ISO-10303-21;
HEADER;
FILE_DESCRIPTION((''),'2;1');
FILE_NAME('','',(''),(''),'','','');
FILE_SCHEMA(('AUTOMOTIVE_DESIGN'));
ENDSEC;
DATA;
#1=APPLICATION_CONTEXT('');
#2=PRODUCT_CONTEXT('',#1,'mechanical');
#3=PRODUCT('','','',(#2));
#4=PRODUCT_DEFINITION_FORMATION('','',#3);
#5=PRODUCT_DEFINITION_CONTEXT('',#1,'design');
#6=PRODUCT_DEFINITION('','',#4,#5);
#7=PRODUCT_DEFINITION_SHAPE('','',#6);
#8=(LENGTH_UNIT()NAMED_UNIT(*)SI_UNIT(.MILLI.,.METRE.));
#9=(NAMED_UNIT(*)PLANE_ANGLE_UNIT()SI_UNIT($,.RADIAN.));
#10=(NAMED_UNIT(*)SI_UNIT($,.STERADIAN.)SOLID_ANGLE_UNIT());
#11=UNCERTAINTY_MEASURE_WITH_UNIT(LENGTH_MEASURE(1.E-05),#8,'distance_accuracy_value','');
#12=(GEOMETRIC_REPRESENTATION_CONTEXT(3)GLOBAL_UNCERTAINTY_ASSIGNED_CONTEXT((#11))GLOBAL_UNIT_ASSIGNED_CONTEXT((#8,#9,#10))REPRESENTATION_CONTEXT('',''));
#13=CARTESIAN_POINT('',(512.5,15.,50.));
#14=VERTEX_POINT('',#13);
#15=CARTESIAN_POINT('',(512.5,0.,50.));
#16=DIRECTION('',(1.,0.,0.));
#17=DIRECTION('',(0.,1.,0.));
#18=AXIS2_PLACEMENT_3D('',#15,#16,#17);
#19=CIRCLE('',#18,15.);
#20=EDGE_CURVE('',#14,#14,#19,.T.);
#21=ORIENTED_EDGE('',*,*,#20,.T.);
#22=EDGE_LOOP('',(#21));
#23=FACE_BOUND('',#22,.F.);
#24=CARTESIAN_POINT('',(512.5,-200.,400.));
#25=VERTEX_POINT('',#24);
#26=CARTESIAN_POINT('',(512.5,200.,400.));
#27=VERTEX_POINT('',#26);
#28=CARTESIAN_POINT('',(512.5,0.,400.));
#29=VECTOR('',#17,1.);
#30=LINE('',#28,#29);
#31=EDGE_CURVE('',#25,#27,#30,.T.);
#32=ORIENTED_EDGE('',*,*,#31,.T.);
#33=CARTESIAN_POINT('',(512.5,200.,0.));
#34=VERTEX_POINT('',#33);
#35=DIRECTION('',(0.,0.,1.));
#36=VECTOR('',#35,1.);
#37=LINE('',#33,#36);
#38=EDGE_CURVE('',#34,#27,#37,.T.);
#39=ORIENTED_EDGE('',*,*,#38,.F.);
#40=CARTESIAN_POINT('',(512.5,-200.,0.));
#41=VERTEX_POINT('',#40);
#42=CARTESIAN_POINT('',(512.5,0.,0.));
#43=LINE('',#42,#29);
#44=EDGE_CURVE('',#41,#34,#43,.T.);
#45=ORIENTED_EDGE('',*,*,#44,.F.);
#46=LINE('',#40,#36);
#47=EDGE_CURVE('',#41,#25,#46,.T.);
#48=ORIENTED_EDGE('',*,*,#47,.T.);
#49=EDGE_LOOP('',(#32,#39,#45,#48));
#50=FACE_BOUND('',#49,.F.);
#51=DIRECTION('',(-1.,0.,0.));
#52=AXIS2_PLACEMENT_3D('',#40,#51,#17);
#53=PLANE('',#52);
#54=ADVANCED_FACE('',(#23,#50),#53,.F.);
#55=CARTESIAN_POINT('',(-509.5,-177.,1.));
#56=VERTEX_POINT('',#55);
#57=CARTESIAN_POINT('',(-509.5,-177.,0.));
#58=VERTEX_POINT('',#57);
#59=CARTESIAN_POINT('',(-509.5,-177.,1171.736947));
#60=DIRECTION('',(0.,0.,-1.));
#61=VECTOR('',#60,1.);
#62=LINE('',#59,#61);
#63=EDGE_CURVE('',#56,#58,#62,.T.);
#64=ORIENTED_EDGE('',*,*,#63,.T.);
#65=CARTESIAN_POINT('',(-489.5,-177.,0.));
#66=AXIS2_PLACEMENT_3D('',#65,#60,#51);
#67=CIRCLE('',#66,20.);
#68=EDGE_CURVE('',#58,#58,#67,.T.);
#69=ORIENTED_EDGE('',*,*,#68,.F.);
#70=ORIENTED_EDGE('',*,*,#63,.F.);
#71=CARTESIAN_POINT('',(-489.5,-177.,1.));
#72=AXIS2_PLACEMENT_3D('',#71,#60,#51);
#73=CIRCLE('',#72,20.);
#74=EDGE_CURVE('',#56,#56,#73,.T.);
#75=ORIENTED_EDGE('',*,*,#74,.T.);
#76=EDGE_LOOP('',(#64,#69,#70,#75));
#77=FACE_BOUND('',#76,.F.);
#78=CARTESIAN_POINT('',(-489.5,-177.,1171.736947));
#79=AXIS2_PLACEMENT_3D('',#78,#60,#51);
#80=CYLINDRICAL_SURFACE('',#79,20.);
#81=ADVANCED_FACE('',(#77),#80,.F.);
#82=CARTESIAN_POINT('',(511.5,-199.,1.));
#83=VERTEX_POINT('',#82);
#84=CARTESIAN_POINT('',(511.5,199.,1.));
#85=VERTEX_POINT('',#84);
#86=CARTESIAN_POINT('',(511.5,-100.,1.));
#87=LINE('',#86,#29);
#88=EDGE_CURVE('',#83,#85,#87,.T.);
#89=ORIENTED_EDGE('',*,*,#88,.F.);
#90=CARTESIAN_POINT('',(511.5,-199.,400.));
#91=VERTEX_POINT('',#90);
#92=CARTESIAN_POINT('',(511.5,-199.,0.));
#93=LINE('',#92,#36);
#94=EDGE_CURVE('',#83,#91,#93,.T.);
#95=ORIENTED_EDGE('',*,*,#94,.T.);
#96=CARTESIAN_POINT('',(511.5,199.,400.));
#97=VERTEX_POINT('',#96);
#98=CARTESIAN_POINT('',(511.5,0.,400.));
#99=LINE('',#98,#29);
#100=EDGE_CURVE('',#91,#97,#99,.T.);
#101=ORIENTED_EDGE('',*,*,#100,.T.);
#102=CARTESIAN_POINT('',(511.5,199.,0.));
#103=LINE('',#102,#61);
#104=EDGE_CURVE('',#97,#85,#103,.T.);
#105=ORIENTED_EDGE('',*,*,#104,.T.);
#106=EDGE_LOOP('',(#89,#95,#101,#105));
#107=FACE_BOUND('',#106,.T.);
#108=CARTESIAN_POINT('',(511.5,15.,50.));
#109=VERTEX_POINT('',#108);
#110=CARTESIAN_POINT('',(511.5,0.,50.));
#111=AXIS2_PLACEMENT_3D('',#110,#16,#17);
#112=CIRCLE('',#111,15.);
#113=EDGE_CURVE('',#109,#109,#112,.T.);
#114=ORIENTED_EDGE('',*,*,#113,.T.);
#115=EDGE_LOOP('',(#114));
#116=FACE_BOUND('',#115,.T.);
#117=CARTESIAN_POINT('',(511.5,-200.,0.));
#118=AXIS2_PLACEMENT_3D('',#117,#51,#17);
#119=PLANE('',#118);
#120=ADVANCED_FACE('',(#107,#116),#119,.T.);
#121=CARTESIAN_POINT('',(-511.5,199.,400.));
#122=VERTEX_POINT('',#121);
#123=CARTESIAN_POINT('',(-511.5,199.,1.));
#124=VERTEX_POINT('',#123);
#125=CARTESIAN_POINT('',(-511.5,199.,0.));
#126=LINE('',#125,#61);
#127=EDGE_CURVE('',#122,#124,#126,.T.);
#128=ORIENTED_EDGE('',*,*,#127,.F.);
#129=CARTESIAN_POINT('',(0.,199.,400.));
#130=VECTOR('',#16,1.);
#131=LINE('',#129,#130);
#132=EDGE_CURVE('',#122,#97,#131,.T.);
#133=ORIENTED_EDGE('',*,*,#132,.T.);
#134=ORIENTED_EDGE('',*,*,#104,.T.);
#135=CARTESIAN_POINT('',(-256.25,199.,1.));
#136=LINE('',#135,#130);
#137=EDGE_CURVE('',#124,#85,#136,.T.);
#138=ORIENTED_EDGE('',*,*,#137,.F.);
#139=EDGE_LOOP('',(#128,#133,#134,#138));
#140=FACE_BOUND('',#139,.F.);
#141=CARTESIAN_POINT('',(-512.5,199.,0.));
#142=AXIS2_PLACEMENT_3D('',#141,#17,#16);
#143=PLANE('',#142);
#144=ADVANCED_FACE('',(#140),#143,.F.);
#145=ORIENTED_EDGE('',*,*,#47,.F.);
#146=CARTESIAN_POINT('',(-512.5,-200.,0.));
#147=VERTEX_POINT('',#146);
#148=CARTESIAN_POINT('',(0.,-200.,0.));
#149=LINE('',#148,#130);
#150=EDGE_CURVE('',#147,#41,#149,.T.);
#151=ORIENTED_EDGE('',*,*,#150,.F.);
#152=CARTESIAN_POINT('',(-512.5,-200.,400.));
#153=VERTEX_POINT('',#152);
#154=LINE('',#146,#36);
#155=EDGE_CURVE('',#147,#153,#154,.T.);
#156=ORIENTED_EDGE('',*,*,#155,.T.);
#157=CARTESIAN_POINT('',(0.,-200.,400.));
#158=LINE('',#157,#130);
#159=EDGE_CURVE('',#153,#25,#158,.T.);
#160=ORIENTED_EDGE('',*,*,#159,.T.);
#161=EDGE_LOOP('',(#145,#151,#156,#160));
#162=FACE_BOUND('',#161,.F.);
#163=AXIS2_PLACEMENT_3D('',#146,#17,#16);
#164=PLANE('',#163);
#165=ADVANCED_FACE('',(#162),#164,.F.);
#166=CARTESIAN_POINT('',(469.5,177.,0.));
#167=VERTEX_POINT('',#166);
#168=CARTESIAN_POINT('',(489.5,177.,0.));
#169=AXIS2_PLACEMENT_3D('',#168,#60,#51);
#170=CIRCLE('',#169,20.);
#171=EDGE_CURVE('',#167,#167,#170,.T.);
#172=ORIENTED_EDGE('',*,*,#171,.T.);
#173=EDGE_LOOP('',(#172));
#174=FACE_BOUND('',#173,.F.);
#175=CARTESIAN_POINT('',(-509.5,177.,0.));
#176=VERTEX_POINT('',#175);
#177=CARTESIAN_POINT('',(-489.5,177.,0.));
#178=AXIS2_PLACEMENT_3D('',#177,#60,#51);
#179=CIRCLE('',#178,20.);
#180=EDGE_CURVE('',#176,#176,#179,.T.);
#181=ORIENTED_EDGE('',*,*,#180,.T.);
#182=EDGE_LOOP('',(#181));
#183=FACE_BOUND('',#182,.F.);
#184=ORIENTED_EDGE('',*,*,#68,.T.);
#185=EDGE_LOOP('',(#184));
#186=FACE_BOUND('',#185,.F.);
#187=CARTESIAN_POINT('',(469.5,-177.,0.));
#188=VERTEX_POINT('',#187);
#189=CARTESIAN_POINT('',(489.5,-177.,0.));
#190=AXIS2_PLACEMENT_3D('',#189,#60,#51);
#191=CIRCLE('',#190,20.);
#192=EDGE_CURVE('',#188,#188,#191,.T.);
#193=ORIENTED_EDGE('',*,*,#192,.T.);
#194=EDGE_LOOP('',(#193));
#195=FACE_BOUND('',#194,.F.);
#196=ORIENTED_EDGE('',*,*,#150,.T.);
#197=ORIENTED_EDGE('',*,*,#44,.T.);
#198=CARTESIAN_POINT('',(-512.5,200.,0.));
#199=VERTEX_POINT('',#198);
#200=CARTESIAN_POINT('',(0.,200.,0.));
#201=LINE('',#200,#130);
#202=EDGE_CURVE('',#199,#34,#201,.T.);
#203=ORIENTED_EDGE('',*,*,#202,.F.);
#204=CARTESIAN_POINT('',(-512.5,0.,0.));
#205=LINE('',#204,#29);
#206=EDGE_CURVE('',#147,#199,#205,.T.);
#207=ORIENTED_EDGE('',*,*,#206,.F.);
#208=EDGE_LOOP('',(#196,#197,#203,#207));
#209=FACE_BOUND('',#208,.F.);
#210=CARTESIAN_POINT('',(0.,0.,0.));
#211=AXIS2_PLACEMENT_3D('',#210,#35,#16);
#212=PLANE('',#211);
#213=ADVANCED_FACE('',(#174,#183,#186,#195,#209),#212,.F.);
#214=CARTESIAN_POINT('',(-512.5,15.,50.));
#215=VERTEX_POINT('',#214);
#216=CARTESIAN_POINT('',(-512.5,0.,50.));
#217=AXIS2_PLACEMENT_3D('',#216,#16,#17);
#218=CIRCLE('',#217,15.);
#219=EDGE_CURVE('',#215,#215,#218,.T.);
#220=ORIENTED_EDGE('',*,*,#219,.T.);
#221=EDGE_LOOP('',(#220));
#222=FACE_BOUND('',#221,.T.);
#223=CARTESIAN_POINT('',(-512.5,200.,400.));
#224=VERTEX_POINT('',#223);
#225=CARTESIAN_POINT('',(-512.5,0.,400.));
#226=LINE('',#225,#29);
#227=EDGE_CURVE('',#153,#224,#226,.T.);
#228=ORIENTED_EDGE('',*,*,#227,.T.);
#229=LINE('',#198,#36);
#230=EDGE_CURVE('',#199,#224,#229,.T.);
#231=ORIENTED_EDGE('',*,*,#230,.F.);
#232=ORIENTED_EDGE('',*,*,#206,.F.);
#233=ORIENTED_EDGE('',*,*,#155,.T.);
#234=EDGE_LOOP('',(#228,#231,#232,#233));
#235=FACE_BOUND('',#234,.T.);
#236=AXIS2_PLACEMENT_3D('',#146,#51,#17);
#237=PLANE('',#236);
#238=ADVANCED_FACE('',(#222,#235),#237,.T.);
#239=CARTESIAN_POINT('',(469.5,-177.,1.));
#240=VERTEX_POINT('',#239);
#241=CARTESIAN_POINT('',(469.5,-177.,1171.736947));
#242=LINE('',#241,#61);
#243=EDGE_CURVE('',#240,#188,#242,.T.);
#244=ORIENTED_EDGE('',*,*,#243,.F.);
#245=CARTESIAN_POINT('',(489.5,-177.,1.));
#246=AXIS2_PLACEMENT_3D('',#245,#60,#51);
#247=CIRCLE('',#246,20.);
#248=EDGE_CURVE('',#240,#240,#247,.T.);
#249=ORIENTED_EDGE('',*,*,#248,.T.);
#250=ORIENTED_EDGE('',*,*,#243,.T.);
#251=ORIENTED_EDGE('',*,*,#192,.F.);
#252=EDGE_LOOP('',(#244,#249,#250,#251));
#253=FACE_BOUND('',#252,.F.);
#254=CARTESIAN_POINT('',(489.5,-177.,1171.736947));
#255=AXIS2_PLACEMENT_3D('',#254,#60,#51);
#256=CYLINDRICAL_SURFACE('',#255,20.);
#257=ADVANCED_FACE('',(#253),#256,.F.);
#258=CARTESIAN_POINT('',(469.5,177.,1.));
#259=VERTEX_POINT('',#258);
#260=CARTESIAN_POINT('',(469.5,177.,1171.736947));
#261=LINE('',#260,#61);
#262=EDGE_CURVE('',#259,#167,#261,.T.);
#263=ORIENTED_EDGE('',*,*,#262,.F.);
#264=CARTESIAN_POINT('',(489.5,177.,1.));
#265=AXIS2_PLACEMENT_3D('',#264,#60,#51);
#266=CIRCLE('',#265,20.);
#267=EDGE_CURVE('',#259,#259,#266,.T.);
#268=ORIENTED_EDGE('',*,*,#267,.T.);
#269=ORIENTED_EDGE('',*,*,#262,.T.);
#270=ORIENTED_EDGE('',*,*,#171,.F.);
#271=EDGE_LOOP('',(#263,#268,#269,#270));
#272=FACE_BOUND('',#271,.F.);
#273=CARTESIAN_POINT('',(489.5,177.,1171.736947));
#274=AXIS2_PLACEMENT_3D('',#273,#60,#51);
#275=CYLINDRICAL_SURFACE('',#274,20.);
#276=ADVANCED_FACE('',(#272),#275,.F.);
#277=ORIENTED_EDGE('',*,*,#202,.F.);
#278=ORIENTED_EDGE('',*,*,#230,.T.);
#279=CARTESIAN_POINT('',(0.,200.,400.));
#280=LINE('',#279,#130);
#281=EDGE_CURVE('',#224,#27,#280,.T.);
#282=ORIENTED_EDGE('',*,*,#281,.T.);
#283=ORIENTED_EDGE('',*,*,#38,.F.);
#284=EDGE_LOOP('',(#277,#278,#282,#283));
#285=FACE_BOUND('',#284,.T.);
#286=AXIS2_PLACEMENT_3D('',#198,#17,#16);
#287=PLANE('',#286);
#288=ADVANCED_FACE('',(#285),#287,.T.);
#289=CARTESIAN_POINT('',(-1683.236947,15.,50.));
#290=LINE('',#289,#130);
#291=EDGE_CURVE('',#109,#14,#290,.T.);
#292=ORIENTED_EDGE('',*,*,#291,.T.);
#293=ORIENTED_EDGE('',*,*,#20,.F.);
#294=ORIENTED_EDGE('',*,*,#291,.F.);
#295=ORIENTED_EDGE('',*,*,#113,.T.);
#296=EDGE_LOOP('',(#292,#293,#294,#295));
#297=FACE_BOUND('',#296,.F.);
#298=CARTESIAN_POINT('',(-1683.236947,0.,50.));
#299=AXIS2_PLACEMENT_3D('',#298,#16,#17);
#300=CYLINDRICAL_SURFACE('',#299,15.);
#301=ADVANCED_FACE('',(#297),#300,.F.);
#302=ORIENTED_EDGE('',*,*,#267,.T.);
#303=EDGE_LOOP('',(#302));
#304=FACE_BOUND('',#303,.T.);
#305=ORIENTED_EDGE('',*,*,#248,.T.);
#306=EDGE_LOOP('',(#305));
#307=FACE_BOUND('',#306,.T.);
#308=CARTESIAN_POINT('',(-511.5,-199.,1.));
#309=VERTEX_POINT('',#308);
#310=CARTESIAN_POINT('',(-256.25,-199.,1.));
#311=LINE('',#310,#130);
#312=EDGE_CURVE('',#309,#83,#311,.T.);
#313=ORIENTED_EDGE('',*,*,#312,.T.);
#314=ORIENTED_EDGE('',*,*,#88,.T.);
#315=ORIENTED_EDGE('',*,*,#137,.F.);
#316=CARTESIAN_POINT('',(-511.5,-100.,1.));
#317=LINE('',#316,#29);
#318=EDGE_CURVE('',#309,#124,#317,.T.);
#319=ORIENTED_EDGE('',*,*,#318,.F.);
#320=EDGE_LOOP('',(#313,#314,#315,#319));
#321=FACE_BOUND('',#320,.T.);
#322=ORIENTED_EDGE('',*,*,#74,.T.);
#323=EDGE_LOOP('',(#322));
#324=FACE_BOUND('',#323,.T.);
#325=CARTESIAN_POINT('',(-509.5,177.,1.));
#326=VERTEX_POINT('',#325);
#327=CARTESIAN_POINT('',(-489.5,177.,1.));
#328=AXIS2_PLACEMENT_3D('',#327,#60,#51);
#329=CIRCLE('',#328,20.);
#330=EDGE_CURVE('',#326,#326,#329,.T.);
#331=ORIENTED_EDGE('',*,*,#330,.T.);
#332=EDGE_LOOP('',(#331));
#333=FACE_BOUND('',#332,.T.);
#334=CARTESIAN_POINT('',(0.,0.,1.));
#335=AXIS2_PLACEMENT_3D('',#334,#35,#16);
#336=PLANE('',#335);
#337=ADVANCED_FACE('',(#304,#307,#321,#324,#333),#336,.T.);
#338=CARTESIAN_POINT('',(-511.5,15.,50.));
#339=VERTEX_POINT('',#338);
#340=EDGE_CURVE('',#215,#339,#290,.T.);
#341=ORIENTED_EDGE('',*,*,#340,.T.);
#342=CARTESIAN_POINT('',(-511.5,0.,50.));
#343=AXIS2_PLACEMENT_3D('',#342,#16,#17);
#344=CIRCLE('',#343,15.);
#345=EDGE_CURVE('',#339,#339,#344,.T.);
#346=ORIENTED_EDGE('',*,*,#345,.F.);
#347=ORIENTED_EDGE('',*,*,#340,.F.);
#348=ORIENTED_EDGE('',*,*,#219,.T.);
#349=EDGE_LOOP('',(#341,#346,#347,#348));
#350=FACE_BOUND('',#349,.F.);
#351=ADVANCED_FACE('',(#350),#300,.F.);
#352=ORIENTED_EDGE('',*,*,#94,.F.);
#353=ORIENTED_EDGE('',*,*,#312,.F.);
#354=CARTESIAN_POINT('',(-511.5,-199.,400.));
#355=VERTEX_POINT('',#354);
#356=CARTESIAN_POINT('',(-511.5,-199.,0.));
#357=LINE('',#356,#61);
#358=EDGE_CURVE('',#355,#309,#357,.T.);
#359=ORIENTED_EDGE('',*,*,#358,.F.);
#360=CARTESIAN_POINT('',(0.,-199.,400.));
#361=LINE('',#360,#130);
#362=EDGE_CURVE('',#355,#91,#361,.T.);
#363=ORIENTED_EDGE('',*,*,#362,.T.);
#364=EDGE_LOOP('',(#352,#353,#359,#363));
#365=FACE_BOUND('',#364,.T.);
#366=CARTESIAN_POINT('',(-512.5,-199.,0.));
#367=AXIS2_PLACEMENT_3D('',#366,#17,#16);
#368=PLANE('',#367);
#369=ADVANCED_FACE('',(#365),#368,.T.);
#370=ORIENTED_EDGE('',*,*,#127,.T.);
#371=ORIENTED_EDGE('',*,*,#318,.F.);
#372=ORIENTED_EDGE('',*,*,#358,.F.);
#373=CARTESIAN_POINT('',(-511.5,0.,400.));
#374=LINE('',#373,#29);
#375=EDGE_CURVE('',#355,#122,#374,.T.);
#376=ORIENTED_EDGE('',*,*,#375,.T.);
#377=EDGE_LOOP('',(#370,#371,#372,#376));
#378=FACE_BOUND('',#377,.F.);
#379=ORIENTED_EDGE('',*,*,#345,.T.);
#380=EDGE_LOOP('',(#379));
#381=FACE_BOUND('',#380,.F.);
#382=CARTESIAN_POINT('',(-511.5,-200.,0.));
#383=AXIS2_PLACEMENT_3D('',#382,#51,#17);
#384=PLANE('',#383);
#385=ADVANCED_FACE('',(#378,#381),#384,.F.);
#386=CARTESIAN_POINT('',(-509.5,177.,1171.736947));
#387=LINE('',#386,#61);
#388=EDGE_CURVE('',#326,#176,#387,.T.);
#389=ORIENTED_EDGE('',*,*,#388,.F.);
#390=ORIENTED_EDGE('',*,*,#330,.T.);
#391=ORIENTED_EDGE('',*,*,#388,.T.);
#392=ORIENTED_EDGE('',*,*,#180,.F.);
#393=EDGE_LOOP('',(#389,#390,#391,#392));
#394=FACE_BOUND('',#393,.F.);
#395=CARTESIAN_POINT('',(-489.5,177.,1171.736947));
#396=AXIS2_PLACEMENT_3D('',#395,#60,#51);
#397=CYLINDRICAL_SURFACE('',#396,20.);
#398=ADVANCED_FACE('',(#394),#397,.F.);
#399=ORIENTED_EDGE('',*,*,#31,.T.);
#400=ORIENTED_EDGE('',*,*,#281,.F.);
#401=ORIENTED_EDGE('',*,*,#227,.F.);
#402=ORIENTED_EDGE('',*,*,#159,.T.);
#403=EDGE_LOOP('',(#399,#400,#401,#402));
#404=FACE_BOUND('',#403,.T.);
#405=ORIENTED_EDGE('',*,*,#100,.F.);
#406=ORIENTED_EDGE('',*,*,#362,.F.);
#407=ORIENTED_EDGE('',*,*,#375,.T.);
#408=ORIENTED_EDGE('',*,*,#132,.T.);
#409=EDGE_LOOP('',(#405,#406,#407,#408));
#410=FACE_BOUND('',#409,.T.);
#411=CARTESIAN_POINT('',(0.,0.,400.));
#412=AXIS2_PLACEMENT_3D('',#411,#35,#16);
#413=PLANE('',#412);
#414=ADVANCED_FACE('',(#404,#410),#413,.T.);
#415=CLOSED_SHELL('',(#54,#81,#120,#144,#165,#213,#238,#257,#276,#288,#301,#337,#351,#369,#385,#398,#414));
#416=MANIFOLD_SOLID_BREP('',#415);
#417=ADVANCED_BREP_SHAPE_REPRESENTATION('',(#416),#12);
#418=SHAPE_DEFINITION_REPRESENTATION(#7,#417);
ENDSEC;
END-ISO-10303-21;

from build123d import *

# Parameters (mm, degrees)
F0_W     = 1025
F0_H     = 400
F1_DEPTH = 400
F2_T     = -1
F5_D     = 40
F8_D     = 30


# Not quite as in the source:
# - the program builds the solid bodies; features that only make, move or delete a surface that nothing else refers to are left out


with BuildPart() as f1:
    # F0 (on Top) → F1 (new body)
    with BuildSketch(Plane.XY):
        Rectangle(F0_W, F0_H)
    extrude(amount=F1_DEPTH)

    # F2
    f2_openings = [f1.faces().sort_by_distance(p)[0] for p in [
        (0, 0, 400),
    ]]
    offset(amount=F2_T, openings=f2_openings)

    # F5 (through all)
    with Locations(Plane.XY.offset(1)):
        with Locations((489.5, 177), (489.5, -177), (-489.5, 177), (-489.5, -177)):
            Hole(F5_D / 2)

    # F8 (through all)
    with Locations(Plane(origin=(-512.5, 0, 0), x_dir=(0, -1, 0), z_dir=(-1, 0, 0))):
        with Locations((0, 50)):
            Hole(F8_D / 2)


solid = f1.part
